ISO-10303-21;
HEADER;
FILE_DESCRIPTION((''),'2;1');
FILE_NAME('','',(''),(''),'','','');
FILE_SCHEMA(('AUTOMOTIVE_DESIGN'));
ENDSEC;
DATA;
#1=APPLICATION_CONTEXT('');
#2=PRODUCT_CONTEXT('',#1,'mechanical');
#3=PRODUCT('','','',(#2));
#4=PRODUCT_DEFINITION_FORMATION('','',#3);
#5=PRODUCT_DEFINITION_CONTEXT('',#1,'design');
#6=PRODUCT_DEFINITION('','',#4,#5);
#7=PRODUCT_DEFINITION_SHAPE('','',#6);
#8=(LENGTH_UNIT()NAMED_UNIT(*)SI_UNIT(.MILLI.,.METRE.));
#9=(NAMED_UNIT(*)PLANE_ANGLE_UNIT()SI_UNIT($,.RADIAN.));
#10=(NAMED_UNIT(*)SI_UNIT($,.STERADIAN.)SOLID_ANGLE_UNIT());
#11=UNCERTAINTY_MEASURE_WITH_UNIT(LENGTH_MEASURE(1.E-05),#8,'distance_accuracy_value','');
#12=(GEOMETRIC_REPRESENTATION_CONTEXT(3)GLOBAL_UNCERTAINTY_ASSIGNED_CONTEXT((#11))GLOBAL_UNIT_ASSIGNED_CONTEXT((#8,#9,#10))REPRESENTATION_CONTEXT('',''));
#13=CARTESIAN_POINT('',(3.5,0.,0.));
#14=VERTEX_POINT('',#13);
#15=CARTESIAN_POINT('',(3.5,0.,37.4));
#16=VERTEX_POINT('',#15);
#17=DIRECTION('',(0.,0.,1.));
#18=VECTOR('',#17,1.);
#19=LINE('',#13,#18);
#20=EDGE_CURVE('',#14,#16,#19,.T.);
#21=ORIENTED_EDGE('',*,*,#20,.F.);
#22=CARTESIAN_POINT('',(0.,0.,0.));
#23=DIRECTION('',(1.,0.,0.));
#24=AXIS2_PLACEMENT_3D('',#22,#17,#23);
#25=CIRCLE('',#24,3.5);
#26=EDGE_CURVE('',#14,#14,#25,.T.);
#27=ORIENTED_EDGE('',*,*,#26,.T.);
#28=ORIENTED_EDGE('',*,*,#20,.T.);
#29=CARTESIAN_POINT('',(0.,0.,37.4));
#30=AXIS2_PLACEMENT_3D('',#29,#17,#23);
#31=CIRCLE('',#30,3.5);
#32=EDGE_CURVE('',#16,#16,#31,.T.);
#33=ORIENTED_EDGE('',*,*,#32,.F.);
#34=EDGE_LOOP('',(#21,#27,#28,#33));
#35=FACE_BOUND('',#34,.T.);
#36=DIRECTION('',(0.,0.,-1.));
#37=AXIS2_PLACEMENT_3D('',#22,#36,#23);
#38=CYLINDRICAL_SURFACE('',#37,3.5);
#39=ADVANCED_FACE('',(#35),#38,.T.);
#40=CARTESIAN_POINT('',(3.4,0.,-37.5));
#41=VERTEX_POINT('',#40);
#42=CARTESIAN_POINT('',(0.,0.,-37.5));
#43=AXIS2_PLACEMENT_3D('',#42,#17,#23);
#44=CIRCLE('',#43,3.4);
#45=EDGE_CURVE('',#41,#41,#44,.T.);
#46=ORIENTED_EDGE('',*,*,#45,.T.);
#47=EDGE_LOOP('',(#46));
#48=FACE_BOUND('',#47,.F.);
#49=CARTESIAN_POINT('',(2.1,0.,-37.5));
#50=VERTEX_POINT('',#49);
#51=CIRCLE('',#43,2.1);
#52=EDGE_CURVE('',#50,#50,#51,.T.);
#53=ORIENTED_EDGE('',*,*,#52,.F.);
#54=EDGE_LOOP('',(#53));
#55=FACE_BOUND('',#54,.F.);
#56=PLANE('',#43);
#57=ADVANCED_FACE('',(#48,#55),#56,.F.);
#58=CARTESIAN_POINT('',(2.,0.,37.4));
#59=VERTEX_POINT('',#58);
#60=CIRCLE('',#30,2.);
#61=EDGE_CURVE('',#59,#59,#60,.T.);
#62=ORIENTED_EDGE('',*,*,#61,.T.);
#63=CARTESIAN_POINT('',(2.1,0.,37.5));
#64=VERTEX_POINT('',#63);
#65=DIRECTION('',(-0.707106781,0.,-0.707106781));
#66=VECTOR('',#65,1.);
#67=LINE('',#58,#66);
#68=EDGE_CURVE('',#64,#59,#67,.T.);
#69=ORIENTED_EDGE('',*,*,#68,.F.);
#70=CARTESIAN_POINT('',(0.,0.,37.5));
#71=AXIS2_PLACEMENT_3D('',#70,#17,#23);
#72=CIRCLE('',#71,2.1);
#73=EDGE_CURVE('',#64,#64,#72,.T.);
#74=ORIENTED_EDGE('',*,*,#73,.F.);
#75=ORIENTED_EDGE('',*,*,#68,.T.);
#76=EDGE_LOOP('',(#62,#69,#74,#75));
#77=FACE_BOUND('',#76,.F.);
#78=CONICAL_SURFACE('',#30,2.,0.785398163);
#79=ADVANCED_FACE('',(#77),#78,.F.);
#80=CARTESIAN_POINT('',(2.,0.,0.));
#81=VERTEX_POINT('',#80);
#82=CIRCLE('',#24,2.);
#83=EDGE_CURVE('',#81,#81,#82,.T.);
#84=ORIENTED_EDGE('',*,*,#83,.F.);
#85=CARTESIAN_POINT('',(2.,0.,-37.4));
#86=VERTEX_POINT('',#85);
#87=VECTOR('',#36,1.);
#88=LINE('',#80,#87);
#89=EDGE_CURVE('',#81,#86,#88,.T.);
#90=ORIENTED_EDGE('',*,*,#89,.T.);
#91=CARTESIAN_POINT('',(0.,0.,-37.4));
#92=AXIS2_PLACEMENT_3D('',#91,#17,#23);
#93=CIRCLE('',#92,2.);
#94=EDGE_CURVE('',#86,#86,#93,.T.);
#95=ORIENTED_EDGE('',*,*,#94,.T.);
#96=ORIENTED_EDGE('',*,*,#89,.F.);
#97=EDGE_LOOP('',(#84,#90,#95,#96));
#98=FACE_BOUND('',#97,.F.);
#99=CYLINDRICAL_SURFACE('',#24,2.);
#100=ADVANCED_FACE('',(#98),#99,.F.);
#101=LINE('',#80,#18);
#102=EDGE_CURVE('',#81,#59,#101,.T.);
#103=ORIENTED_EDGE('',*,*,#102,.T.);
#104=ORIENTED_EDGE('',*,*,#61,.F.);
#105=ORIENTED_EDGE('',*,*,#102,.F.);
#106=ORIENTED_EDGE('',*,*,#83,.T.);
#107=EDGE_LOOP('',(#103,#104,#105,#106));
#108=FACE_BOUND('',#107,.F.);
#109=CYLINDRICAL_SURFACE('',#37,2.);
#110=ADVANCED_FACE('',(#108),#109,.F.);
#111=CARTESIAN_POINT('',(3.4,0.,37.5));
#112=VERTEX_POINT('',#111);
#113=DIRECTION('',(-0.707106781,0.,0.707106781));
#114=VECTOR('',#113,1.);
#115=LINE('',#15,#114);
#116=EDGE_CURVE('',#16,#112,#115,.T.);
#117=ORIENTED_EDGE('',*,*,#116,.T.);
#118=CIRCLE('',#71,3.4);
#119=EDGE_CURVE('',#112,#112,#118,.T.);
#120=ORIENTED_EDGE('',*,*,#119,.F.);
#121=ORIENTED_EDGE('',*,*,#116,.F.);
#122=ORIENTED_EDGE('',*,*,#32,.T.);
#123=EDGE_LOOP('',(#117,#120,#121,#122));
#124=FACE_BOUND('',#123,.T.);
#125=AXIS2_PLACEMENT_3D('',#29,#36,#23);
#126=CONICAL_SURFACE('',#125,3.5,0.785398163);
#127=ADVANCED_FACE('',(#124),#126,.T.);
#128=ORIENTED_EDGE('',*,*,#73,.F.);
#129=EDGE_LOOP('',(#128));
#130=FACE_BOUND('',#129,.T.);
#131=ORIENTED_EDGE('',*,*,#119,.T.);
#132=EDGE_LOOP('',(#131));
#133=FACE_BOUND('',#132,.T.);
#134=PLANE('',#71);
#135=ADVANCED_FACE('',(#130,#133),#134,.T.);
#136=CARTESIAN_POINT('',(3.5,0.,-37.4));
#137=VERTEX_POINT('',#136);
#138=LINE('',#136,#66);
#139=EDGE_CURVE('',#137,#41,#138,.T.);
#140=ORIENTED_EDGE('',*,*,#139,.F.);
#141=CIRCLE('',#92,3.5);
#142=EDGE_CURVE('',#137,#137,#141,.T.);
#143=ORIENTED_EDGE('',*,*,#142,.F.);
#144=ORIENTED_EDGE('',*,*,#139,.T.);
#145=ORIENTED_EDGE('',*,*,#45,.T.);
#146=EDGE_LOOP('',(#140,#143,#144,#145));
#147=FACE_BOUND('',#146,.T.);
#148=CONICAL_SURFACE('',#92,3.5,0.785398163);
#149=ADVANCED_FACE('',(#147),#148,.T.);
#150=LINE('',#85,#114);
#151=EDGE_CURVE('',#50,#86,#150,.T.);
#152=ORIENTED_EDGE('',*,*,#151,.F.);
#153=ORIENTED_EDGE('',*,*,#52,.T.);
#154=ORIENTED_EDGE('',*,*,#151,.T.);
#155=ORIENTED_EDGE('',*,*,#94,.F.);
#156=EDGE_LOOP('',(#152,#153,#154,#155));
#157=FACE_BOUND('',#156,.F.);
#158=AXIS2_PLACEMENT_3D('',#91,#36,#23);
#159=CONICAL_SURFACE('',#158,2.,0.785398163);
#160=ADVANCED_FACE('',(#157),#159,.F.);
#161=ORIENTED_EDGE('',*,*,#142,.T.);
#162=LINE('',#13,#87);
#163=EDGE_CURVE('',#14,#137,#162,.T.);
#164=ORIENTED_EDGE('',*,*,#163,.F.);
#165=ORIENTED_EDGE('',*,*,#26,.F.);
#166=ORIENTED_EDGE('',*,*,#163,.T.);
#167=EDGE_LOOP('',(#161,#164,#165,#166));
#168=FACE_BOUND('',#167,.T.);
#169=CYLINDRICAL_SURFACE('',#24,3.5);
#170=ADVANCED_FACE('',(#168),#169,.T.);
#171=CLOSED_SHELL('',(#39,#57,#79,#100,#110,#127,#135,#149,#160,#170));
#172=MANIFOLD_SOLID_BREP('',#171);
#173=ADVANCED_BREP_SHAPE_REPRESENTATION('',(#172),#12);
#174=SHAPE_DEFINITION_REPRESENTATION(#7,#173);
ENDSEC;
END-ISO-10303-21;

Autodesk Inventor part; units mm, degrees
ref_plane "YZ Plane" through (0, 0, 0) normal (1, 0, 0) x (0, 1, 0)
ref_plane "XZ Plane" through (0, 0, 0) normal (0, 1, 0) x (-1, 0, 0)
ref_plane "XY Plane" through (0, 0, 0) normal (0, 0, 1) x (1, 0, 0)
sketch "Sketch1" plane through (0, 0, 0) normal (0, 0, 1) x (1, 0, 0)
  circle A0 centre (0, 0) radius 3.5
  circle A1 centre (0, 0) radius 2
  dimension "d0" = 7
  dimension "d1" = 4
extrude "Extrusion1" add sketch "Sketch1" along normal mid plane 75
thread "Thread1" size "M4x0.7" class "6H" standard "ANSI Metric M Profile" length 10
thread "Thread2" size "M4x0.7" class "6H" standard "ANSI Metric M Profile" length 10
chamfer "Chamfer1" distance 0.1 angle 45 4 edges at (-3.5, 0, 37.5) (-2, 0, 37.5) (-2, 0, -37.5) (-3.5, 0, -37.5)
properties part number "M4 75mm Standoff" material "Aluminum 6061"
